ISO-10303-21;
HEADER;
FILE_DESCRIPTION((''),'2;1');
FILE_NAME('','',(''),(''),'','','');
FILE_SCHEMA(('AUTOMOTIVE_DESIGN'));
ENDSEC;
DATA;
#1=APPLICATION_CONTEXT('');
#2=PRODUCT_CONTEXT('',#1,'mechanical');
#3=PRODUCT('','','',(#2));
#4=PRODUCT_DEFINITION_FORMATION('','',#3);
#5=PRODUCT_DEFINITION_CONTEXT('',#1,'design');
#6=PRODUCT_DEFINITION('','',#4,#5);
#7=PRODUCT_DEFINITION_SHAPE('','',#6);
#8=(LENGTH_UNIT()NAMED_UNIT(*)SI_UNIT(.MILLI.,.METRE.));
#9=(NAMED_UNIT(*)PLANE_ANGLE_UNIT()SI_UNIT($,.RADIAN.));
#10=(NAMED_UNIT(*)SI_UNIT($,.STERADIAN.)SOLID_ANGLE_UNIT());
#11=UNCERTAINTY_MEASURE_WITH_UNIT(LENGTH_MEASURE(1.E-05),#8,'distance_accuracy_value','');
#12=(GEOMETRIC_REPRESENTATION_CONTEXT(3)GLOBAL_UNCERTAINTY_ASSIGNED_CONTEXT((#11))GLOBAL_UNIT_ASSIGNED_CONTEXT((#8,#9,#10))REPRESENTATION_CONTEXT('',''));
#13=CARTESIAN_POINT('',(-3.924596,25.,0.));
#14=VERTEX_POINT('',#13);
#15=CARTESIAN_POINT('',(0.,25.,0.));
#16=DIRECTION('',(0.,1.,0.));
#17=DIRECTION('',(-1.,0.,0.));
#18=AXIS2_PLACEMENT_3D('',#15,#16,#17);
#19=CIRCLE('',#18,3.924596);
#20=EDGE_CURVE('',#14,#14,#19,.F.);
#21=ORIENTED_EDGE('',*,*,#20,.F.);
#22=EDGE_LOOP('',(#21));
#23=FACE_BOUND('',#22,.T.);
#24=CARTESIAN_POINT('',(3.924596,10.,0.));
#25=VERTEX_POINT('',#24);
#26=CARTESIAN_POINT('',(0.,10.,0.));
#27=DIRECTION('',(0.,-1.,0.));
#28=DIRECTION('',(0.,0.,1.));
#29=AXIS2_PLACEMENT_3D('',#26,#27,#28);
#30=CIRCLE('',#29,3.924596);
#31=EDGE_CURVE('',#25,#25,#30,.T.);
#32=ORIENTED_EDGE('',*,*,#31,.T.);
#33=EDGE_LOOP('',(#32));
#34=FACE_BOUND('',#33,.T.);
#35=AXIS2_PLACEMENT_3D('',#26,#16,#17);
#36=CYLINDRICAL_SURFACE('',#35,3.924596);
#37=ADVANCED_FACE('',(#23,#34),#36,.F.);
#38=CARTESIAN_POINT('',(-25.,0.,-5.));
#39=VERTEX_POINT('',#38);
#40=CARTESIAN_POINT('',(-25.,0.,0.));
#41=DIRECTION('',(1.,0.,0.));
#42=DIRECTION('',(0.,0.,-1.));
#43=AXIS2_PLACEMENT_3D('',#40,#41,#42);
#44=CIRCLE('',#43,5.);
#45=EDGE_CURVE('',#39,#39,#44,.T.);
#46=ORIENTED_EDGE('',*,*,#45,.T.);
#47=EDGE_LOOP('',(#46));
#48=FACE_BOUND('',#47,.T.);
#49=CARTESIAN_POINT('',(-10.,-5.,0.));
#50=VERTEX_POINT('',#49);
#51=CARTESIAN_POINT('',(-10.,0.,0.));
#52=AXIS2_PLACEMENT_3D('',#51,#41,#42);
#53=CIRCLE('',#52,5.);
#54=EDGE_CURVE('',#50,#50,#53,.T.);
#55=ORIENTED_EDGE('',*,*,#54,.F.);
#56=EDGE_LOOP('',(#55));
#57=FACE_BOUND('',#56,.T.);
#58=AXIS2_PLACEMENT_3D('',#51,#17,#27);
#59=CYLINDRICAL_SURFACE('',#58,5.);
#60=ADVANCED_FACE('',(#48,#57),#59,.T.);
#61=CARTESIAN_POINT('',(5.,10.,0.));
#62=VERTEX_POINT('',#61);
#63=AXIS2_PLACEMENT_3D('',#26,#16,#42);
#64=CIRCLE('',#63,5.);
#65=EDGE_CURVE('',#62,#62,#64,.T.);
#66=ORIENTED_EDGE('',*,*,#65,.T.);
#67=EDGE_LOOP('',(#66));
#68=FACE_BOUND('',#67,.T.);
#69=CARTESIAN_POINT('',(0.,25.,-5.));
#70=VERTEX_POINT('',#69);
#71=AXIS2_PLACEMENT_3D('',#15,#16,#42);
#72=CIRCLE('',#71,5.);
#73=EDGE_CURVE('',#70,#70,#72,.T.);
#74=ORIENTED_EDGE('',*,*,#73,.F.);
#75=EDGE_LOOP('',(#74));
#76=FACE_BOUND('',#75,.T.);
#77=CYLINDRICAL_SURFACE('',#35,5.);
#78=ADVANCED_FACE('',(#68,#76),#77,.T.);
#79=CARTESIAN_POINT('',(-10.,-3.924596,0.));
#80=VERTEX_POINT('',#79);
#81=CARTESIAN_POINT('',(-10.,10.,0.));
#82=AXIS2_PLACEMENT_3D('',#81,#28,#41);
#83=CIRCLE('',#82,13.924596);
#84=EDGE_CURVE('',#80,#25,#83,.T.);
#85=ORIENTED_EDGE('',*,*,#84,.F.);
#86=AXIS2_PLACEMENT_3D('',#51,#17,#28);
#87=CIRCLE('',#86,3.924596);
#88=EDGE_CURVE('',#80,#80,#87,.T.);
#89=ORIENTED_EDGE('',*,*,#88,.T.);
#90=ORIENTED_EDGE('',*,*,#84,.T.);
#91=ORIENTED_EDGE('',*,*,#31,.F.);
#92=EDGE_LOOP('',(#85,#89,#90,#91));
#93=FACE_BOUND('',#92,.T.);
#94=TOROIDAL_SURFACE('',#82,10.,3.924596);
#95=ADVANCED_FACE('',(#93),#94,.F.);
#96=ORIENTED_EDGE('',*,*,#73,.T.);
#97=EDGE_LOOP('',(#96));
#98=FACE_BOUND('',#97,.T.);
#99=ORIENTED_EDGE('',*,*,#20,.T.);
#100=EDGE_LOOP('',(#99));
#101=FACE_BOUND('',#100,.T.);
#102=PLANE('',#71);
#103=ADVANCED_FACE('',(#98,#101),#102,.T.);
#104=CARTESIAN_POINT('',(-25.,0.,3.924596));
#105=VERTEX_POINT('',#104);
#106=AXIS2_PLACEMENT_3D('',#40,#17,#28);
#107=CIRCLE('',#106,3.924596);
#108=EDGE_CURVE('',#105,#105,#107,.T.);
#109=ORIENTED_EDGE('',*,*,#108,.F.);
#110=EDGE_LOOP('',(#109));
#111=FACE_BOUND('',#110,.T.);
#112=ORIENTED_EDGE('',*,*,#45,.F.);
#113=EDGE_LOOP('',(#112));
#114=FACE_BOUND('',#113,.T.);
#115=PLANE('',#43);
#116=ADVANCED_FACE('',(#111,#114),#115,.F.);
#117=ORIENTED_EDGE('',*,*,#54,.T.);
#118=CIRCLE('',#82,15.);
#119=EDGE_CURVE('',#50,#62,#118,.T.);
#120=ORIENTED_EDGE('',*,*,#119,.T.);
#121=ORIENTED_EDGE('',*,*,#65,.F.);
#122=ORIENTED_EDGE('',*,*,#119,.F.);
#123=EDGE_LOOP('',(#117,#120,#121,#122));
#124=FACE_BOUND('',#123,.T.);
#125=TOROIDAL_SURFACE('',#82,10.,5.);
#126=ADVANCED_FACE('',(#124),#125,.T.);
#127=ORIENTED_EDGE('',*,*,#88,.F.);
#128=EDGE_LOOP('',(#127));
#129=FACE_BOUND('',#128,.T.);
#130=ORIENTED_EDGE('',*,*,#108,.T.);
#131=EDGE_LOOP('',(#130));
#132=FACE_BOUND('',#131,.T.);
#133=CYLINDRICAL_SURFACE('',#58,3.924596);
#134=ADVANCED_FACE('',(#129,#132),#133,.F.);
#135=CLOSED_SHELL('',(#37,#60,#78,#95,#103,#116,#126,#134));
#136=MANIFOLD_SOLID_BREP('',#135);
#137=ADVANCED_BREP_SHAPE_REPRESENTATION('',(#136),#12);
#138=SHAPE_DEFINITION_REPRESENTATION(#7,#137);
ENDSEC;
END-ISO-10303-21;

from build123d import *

# Parameters (mm, degrees)
SWEEP_START         = 9.9999999
SWEEP_1_OUTLINE_R   = 5
SWEEP_1_DEPTH       = 15.0000001
SWEEP_START_2       = -25
SWEEP_1_2_OUTLINE_R = 5
SWEEP_1_2_DEPTH     = 15
SWEEP_1_3_OUTLINE_R = 5
SWEEP_1_3_ANGLE     = 90
SKETCH_2_R          = 3.924596356


with BuildPart() as part:
    # Sweep 1: read off the stored shape, not the designer's step
    # Sweep 1 outline → Sweep 1 (new body)
    with BuildSketch(Plane(origin=(0, 0, 0), x_dir=(1, 0, 0), z_dir=(0, 1, 0)).offset(SWEEP_START)):
        Circle(SWEEP_1_OUTLINE_R)
    extrude(amount=SWEEP_1_DEPTH)



with BuildPart() as body_2:
    # Sweep 1 2 outline → Sweep 1 2 (new body)
    with BuildSketch(Plane.YZ.offset(SWEEP_START_2)):
        Circle(SWEEP_1_2_OUTLINE_R)
    extrude(amount=SWEEP_1_2_DEPTH)


with BuildPart() as part_1:
    add(part.part)

    add(body_2.part)  # Sweep 1 3 merges body 2
    # Sweep 1 3 outline → Sweep 1 3 (revolve)
    with BuildSketch(Plane(origin=(-10, 10, 0), x_dir=(0, -1, 0), z_dir=(-1, 0, 0))):
        with Locations((10, 0)):
            Circle(SWEEP_1_3_OUTLINE_R)
    revolve(axis=Axis((-10, 10, 0), (0, 0, 1)), revolution_arc=SWEEP_1_3_ANGLE)

    # Sweep 1 4: sweep along a path in 草图4
    with BuildLine(Plane.XY) as sweep_1_4_path:
        Line((0, 25.105232373), (0, 10))
        ThreePointArc((0, 10), (-2.928932188, 2.928932188), (-10, 0))
        Line((-10, 0), (-25, 0))
    # 草图2 → Sweep 1 4 (sweep, cut)
    with BuildSketch(Plane.ZY.offset(25)):
        Circle(SKETCH_2_R)
    sweep(path=sweep_1_4_path.line, mode=Mode.SUBTRACT)


solid = part_1.part
